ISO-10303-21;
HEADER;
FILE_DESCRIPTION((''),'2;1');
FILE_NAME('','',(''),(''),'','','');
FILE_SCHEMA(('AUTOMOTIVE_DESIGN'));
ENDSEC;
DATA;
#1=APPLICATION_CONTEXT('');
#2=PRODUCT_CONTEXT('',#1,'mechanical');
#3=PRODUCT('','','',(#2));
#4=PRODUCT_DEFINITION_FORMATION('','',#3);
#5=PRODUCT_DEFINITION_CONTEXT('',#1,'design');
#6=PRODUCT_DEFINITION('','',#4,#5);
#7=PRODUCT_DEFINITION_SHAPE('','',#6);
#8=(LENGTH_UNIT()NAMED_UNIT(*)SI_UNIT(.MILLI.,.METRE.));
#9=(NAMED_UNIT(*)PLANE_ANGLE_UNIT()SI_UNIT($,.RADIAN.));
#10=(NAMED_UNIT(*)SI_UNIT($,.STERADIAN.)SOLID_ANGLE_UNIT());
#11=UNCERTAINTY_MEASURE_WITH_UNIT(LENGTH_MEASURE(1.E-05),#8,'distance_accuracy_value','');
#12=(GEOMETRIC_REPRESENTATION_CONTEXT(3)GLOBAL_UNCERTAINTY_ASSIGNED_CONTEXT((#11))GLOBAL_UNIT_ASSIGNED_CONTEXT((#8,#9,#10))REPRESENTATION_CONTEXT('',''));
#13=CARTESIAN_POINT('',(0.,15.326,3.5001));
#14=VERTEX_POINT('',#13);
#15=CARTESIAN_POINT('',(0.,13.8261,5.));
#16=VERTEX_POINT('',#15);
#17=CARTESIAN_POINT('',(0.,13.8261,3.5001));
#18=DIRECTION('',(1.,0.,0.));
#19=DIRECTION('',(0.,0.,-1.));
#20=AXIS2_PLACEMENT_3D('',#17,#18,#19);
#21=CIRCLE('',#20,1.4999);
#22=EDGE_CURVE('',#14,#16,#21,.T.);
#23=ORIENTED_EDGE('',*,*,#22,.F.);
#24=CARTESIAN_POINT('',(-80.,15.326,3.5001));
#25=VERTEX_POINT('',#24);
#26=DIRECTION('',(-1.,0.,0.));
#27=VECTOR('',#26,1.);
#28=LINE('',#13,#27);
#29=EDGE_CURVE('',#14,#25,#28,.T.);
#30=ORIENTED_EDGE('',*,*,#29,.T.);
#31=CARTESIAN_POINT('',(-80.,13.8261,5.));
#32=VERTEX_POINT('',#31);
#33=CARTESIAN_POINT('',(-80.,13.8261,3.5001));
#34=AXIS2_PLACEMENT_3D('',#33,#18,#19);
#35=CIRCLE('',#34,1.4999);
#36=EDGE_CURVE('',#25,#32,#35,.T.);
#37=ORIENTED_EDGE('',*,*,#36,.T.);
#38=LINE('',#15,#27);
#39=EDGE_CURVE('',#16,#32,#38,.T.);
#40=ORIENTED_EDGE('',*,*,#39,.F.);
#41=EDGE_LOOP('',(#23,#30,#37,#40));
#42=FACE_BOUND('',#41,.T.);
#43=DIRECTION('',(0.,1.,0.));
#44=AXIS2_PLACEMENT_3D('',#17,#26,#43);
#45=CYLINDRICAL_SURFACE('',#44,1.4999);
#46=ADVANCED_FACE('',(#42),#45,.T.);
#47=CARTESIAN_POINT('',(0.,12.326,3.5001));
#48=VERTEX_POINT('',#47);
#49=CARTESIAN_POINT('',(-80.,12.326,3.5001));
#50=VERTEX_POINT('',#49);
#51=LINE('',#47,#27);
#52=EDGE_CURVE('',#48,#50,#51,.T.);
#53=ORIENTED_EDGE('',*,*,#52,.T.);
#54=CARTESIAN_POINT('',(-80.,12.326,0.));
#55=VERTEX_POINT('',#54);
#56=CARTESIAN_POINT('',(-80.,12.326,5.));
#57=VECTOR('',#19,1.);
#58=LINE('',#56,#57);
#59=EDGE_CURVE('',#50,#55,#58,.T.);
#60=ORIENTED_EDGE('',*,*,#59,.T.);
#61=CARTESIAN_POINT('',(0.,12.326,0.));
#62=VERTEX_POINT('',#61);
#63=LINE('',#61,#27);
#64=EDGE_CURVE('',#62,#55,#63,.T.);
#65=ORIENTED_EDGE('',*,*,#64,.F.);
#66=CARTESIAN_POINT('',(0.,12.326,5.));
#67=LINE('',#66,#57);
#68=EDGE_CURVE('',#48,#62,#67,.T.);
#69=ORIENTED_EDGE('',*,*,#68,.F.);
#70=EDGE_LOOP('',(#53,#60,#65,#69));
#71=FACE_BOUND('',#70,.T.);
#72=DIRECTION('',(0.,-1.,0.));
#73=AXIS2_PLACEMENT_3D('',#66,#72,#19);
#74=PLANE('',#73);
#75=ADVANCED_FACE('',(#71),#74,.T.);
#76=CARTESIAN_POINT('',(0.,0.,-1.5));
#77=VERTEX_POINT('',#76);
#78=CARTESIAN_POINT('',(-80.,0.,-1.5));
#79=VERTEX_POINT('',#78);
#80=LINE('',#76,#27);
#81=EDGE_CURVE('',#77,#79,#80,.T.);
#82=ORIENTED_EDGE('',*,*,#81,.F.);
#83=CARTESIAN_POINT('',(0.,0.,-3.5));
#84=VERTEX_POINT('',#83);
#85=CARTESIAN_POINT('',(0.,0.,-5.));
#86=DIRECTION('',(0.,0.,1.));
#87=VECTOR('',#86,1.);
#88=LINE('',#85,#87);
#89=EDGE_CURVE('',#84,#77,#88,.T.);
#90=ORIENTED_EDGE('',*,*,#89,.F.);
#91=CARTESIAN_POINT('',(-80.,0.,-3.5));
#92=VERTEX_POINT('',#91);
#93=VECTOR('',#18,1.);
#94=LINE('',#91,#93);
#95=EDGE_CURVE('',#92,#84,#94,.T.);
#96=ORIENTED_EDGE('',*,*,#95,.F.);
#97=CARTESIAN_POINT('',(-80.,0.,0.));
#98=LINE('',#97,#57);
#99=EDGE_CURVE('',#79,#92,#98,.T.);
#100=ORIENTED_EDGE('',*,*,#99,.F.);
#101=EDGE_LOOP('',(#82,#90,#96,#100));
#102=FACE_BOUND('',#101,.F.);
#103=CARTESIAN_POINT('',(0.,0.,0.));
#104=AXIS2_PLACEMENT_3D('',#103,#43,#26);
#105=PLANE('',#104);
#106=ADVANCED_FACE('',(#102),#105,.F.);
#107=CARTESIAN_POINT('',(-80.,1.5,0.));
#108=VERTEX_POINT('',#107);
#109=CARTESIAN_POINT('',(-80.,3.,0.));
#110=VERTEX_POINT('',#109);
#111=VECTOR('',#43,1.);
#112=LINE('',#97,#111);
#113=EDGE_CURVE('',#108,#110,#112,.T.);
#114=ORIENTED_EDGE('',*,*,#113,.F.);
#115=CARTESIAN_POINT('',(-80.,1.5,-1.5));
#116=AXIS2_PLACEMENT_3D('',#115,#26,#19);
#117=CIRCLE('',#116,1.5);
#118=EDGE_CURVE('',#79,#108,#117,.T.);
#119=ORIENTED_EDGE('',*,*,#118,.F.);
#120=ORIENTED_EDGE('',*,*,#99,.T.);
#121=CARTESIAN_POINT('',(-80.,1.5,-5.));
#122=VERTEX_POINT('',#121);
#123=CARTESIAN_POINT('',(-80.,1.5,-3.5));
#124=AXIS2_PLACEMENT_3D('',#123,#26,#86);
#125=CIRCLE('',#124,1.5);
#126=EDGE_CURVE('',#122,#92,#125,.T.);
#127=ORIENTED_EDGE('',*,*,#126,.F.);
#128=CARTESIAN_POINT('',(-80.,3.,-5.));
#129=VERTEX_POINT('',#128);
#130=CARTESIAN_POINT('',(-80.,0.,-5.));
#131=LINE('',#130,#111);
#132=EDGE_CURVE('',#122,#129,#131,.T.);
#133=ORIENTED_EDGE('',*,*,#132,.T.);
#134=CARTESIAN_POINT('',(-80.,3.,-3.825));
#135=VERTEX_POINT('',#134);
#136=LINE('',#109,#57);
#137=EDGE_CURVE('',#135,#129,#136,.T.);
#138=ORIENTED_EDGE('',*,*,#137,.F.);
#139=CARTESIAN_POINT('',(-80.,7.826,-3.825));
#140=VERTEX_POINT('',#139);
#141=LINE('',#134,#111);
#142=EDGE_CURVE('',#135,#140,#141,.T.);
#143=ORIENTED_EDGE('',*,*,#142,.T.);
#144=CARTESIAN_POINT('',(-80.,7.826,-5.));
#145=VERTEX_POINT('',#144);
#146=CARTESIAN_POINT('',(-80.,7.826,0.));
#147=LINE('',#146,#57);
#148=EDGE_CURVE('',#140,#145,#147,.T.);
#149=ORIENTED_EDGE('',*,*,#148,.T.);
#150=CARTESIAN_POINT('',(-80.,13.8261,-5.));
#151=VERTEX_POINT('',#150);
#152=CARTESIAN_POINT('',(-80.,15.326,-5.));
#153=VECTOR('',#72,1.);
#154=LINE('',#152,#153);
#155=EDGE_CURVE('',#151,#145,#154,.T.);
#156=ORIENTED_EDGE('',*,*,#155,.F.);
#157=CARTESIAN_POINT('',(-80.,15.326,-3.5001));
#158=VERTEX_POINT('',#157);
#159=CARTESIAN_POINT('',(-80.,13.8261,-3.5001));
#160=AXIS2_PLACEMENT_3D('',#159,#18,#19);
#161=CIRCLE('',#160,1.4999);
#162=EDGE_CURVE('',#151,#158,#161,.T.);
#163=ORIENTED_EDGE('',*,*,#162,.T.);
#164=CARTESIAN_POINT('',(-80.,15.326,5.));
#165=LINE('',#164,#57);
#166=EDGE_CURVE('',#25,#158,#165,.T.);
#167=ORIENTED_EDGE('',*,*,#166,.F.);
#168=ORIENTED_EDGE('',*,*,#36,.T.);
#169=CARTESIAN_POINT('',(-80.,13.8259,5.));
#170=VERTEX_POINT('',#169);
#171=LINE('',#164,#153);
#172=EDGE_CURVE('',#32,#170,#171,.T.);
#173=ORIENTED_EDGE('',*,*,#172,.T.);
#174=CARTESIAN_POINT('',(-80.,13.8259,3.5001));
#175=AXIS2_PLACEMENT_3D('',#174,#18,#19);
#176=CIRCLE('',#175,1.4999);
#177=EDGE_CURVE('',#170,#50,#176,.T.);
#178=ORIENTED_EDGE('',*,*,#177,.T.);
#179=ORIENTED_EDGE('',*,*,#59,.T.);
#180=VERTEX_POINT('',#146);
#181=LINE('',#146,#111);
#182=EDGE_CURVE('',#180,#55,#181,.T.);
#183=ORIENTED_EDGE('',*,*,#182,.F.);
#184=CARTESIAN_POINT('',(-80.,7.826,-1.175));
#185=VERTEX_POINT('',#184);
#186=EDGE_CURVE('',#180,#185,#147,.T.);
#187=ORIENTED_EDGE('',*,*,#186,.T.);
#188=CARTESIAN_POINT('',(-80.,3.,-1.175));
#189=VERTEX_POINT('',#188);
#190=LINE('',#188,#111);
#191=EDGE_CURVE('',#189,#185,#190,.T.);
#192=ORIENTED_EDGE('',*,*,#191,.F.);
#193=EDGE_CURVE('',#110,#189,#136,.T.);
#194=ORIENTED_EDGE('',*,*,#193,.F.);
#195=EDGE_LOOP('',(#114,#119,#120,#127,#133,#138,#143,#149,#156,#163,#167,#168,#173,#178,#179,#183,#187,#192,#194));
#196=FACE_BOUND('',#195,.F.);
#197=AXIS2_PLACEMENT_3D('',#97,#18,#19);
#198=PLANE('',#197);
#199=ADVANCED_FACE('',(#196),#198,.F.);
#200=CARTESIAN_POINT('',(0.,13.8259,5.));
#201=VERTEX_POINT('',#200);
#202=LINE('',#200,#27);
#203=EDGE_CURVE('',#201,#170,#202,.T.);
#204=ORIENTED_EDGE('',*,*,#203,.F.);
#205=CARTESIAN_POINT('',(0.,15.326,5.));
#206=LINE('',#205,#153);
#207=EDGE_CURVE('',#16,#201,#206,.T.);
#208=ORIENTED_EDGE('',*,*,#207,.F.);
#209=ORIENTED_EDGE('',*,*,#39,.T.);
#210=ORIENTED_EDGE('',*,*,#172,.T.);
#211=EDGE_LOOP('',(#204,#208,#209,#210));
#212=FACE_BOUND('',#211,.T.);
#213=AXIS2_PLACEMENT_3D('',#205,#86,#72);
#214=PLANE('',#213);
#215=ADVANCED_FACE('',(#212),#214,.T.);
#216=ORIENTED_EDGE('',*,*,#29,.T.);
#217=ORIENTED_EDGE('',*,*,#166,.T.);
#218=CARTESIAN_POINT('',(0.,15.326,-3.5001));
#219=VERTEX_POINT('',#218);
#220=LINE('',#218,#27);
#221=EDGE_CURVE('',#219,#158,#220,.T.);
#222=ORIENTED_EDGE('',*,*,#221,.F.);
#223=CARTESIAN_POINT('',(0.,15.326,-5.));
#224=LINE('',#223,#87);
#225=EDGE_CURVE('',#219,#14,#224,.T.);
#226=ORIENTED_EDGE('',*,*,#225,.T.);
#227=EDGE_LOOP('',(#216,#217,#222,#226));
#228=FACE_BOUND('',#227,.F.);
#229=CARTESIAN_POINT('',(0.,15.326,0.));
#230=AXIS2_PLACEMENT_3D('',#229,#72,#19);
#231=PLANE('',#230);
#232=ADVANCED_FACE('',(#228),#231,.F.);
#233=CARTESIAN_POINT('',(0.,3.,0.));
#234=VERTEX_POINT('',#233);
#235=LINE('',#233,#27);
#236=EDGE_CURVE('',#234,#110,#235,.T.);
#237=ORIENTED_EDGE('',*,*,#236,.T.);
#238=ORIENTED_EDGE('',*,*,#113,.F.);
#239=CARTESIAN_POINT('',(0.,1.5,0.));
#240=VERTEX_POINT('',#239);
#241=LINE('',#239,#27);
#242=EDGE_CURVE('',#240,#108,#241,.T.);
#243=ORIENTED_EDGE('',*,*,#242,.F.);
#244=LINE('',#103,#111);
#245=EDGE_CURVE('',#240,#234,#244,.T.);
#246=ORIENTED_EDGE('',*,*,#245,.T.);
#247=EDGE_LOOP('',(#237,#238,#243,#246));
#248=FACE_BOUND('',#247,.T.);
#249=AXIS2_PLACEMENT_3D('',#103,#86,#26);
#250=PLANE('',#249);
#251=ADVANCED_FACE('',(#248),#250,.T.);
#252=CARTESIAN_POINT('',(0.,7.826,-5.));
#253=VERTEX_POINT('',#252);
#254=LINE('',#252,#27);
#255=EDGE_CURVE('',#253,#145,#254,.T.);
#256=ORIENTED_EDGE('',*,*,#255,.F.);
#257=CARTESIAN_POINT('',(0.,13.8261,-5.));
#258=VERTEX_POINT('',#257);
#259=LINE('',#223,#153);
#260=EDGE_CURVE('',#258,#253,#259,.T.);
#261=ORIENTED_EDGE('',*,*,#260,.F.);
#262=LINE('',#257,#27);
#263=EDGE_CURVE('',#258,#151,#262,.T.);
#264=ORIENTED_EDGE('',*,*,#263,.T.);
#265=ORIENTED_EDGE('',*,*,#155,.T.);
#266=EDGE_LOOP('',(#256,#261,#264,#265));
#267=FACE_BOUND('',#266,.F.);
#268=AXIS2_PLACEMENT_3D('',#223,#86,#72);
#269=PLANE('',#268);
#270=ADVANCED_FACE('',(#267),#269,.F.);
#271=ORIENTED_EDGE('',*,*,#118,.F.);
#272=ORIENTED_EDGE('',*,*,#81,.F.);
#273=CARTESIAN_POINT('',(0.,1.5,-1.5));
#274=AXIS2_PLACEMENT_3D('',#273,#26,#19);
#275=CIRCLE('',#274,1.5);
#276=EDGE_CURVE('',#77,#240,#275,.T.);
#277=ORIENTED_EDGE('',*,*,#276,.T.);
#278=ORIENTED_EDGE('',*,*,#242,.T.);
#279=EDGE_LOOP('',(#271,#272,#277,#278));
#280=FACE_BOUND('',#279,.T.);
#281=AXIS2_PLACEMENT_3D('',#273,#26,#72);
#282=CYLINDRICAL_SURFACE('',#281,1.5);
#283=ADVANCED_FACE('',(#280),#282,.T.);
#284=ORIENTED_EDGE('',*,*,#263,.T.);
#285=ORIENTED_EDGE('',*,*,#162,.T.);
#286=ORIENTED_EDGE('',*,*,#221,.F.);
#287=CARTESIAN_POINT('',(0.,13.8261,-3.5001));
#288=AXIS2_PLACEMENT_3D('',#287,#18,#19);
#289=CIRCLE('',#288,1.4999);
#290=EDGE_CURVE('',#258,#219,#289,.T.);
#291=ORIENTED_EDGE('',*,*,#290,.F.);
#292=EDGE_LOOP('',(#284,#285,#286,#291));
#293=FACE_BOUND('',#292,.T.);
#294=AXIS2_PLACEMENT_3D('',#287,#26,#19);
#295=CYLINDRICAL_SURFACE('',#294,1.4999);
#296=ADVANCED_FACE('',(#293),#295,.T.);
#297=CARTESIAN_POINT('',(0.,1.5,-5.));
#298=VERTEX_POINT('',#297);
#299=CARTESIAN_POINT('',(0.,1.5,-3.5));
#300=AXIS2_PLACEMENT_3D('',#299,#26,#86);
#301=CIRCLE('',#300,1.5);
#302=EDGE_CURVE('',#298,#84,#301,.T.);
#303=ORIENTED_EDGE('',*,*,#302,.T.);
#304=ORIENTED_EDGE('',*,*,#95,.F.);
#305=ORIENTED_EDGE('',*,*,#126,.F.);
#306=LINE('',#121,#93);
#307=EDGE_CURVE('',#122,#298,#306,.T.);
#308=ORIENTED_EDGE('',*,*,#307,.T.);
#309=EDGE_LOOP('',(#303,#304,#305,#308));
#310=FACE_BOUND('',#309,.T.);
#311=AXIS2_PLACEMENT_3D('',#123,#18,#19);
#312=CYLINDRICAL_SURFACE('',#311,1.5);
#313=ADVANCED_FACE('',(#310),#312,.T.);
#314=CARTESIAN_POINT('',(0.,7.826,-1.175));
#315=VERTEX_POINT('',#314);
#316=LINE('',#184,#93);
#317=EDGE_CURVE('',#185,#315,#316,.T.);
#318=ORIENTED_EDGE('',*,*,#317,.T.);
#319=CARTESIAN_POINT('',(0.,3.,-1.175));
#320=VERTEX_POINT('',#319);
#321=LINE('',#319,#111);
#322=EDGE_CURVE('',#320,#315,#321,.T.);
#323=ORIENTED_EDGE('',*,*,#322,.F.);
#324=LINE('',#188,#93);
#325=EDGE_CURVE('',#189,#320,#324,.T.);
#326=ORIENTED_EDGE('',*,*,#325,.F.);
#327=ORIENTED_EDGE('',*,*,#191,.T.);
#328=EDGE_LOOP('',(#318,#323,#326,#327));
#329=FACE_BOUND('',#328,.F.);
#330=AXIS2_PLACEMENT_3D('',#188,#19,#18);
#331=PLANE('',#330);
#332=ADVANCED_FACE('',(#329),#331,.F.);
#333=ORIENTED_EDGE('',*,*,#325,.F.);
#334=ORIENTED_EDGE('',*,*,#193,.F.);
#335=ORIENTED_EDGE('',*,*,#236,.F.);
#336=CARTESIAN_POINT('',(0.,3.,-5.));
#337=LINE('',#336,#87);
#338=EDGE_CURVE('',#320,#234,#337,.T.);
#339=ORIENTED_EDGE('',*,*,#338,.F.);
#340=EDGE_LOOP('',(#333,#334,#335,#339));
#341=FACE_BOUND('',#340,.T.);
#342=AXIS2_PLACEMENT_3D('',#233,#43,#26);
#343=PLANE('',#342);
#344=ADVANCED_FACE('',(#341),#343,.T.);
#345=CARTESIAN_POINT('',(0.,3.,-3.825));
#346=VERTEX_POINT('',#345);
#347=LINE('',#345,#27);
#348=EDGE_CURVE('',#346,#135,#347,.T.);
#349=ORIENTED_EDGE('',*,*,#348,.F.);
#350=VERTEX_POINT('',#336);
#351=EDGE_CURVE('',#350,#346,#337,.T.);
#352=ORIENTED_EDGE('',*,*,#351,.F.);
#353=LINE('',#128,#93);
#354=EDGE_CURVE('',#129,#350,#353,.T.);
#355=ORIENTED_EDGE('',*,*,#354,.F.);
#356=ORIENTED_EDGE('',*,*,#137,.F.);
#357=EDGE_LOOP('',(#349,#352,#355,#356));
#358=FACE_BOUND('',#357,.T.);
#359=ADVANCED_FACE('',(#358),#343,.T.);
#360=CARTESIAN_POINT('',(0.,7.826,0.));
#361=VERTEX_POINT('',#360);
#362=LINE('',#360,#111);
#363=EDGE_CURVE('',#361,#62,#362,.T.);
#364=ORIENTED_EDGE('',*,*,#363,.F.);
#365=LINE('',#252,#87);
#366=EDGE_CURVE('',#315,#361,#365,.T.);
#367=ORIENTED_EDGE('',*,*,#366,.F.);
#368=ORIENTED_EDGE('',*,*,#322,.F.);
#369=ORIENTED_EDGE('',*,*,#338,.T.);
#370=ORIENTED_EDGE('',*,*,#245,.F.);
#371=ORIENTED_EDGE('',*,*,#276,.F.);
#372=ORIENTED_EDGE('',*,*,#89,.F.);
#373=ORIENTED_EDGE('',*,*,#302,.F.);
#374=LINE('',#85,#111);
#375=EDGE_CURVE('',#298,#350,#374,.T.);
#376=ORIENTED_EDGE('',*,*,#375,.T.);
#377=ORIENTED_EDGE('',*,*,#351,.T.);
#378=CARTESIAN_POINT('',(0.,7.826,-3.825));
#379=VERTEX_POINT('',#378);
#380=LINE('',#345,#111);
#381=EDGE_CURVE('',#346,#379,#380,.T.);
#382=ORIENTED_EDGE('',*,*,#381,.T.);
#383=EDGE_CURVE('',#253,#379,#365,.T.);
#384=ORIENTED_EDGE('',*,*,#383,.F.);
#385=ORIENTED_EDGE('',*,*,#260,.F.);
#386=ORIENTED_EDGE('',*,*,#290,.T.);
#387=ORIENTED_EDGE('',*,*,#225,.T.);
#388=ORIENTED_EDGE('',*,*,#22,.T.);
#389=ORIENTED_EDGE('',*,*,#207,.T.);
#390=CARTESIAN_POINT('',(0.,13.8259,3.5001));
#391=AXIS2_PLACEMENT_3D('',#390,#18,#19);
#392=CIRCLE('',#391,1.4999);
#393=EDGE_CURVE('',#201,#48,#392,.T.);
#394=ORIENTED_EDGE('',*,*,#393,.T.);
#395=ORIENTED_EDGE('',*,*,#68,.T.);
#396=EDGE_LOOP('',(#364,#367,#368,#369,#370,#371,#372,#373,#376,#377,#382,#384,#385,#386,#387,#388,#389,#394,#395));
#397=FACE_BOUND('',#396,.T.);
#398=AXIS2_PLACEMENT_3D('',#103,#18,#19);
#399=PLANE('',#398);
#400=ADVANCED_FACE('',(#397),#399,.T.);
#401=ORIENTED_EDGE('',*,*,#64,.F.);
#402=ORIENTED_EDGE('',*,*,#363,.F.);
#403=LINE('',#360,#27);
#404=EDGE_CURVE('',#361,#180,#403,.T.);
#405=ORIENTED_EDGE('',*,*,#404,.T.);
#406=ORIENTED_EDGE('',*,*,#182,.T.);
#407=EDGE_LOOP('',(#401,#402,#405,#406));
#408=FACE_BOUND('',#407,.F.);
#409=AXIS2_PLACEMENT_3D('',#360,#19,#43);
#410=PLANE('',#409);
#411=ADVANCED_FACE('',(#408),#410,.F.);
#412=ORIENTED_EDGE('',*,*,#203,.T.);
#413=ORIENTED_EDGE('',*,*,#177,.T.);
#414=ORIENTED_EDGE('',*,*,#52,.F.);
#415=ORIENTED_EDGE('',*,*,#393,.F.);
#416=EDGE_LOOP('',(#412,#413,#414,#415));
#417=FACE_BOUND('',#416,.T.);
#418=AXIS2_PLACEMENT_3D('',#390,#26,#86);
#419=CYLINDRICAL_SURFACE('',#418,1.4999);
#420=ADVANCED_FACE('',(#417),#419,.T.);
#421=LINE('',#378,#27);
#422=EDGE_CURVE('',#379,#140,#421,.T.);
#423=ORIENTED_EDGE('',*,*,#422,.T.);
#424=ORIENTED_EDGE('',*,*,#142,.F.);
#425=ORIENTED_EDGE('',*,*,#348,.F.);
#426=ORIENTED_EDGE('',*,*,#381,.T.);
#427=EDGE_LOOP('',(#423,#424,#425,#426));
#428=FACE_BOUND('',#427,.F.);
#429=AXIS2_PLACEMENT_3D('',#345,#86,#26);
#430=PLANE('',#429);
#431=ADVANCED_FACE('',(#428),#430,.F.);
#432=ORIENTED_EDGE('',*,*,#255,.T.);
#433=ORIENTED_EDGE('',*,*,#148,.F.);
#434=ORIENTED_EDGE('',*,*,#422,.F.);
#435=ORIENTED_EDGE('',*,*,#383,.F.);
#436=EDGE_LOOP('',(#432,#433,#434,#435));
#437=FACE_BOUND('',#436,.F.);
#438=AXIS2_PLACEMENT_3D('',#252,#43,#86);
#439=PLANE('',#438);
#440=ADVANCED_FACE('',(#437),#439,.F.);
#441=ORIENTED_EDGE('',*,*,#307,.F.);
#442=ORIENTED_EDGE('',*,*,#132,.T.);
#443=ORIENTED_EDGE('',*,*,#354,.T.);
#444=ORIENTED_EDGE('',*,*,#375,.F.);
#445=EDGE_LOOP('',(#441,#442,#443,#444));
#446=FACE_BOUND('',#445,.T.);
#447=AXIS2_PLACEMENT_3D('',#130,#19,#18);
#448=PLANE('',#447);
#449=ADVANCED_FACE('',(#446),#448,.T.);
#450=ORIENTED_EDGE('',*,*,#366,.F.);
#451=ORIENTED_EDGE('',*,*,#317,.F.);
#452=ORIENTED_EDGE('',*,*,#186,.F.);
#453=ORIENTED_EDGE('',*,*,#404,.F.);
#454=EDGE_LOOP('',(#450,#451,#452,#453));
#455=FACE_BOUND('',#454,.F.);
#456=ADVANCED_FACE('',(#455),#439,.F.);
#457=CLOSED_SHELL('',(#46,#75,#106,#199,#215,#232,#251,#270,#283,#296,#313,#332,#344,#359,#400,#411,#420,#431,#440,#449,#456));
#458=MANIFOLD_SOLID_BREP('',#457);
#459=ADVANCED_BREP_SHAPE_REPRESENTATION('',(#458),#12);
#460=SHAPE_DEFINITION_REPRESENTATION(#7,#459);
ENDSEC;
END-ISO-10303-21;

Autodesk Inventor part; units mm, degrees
ref_plane "YZ Plane" through (0, 0, 0) normal (1, 0, 0) x (0, 1, 0)
ref_plane "XZ Plane" through (0, 0, 0) normal (0, 1, 0) x (-1, 0, 0)
ref_plane "XY Plane" through (0, 0, 0) normal (0, 0, 1) x (1, 0, 0)
sketch "Sketch1" plane through (0, 0, 0) normal (0, 1, 0) x (-1, 0, 0)
  line L0 (0, 0) -> (80, 0)
  line L1 (80, 0) -> (80, -5)
  line L2 (80, -5) -> (0, -5)
  line L3 (0, -5) -> (0, 0)
  dimension "d0" = 5
  dimension "d1" = 80
extrude "Extrusion1" add sketch "Sketch1" along normal blind 3
sketch "Sketch2" plane through (0, 3, 0) normal (0, 1, 0) x (1, 0, 0)
  line L0 (0, 3.825) -> (-80, 3.825)
  line L1 (-80, 3.825) -> (-80, 1.175)
  line L2 (-80, 1.175) -> (0, 1.175)
  line L3 (0, 1.175) -> (0, 3.825)
  line L4 (0, 3.825) -> (-80, 1.175) construction
  line L5 (-80, 3.825) -> (0, 1.175) construction
  line L6 (0, 0) -> (0, 5) projected
  line L7 (-80, 5) -> (-80, 0) projected
  point P0 (-40, 2.5)
  point P1 (0, 2.5)
  point P2 (0, 2.5)
  dimension "d4" = 2.65
extrude "Extrusion2" add sketch "Sketch2" along normal blind 4.826
sketch "Sketch3" plane through (0, 0, 0) normal (1, 0, 0) x (0, 0, -1)
  line L0 (5, 7.826) -> (0, 7.826)
  line L1 (0, 7.826) -> (0, 15.326)
  line L2 (0, 15.326) -> (5, 15.326)
  line L3 (5, 15.326) -> (5, 7.826)
  line L4 (1.175, 7.826) -> (3.825, 7.826) projected
  line L5 (5, 0) -> (5, 3) projected
  line L6 (0, 0) -> (0, 3) projected
  line L7 (0, 15.326) -> (-5, 15.326)
  line L8 (-5, 15.326) -> (-5, 12.326)
  line L9 (-5, 12.326) -> (0, 12.326)
  line L10 (0, 12.326) -> (0, 15.326)
  dimension "d7" = 7.5
  dimension "d8" = 3
  dimension "d9" = 5
extrude "Extrusion3" add sketch "Sketch3" against normal up to surface (80 mm away)
fillet "Fillet1" radius 1.5 3 edges at (-40, 15.326, -5) (-40, 15.326, 5) (-40, 12.326, 5)
fillet "Fillet2" radius 1.5 2 edges at (-40, 0, 0) (-40, 0, -5)
properties part number "Rails"
